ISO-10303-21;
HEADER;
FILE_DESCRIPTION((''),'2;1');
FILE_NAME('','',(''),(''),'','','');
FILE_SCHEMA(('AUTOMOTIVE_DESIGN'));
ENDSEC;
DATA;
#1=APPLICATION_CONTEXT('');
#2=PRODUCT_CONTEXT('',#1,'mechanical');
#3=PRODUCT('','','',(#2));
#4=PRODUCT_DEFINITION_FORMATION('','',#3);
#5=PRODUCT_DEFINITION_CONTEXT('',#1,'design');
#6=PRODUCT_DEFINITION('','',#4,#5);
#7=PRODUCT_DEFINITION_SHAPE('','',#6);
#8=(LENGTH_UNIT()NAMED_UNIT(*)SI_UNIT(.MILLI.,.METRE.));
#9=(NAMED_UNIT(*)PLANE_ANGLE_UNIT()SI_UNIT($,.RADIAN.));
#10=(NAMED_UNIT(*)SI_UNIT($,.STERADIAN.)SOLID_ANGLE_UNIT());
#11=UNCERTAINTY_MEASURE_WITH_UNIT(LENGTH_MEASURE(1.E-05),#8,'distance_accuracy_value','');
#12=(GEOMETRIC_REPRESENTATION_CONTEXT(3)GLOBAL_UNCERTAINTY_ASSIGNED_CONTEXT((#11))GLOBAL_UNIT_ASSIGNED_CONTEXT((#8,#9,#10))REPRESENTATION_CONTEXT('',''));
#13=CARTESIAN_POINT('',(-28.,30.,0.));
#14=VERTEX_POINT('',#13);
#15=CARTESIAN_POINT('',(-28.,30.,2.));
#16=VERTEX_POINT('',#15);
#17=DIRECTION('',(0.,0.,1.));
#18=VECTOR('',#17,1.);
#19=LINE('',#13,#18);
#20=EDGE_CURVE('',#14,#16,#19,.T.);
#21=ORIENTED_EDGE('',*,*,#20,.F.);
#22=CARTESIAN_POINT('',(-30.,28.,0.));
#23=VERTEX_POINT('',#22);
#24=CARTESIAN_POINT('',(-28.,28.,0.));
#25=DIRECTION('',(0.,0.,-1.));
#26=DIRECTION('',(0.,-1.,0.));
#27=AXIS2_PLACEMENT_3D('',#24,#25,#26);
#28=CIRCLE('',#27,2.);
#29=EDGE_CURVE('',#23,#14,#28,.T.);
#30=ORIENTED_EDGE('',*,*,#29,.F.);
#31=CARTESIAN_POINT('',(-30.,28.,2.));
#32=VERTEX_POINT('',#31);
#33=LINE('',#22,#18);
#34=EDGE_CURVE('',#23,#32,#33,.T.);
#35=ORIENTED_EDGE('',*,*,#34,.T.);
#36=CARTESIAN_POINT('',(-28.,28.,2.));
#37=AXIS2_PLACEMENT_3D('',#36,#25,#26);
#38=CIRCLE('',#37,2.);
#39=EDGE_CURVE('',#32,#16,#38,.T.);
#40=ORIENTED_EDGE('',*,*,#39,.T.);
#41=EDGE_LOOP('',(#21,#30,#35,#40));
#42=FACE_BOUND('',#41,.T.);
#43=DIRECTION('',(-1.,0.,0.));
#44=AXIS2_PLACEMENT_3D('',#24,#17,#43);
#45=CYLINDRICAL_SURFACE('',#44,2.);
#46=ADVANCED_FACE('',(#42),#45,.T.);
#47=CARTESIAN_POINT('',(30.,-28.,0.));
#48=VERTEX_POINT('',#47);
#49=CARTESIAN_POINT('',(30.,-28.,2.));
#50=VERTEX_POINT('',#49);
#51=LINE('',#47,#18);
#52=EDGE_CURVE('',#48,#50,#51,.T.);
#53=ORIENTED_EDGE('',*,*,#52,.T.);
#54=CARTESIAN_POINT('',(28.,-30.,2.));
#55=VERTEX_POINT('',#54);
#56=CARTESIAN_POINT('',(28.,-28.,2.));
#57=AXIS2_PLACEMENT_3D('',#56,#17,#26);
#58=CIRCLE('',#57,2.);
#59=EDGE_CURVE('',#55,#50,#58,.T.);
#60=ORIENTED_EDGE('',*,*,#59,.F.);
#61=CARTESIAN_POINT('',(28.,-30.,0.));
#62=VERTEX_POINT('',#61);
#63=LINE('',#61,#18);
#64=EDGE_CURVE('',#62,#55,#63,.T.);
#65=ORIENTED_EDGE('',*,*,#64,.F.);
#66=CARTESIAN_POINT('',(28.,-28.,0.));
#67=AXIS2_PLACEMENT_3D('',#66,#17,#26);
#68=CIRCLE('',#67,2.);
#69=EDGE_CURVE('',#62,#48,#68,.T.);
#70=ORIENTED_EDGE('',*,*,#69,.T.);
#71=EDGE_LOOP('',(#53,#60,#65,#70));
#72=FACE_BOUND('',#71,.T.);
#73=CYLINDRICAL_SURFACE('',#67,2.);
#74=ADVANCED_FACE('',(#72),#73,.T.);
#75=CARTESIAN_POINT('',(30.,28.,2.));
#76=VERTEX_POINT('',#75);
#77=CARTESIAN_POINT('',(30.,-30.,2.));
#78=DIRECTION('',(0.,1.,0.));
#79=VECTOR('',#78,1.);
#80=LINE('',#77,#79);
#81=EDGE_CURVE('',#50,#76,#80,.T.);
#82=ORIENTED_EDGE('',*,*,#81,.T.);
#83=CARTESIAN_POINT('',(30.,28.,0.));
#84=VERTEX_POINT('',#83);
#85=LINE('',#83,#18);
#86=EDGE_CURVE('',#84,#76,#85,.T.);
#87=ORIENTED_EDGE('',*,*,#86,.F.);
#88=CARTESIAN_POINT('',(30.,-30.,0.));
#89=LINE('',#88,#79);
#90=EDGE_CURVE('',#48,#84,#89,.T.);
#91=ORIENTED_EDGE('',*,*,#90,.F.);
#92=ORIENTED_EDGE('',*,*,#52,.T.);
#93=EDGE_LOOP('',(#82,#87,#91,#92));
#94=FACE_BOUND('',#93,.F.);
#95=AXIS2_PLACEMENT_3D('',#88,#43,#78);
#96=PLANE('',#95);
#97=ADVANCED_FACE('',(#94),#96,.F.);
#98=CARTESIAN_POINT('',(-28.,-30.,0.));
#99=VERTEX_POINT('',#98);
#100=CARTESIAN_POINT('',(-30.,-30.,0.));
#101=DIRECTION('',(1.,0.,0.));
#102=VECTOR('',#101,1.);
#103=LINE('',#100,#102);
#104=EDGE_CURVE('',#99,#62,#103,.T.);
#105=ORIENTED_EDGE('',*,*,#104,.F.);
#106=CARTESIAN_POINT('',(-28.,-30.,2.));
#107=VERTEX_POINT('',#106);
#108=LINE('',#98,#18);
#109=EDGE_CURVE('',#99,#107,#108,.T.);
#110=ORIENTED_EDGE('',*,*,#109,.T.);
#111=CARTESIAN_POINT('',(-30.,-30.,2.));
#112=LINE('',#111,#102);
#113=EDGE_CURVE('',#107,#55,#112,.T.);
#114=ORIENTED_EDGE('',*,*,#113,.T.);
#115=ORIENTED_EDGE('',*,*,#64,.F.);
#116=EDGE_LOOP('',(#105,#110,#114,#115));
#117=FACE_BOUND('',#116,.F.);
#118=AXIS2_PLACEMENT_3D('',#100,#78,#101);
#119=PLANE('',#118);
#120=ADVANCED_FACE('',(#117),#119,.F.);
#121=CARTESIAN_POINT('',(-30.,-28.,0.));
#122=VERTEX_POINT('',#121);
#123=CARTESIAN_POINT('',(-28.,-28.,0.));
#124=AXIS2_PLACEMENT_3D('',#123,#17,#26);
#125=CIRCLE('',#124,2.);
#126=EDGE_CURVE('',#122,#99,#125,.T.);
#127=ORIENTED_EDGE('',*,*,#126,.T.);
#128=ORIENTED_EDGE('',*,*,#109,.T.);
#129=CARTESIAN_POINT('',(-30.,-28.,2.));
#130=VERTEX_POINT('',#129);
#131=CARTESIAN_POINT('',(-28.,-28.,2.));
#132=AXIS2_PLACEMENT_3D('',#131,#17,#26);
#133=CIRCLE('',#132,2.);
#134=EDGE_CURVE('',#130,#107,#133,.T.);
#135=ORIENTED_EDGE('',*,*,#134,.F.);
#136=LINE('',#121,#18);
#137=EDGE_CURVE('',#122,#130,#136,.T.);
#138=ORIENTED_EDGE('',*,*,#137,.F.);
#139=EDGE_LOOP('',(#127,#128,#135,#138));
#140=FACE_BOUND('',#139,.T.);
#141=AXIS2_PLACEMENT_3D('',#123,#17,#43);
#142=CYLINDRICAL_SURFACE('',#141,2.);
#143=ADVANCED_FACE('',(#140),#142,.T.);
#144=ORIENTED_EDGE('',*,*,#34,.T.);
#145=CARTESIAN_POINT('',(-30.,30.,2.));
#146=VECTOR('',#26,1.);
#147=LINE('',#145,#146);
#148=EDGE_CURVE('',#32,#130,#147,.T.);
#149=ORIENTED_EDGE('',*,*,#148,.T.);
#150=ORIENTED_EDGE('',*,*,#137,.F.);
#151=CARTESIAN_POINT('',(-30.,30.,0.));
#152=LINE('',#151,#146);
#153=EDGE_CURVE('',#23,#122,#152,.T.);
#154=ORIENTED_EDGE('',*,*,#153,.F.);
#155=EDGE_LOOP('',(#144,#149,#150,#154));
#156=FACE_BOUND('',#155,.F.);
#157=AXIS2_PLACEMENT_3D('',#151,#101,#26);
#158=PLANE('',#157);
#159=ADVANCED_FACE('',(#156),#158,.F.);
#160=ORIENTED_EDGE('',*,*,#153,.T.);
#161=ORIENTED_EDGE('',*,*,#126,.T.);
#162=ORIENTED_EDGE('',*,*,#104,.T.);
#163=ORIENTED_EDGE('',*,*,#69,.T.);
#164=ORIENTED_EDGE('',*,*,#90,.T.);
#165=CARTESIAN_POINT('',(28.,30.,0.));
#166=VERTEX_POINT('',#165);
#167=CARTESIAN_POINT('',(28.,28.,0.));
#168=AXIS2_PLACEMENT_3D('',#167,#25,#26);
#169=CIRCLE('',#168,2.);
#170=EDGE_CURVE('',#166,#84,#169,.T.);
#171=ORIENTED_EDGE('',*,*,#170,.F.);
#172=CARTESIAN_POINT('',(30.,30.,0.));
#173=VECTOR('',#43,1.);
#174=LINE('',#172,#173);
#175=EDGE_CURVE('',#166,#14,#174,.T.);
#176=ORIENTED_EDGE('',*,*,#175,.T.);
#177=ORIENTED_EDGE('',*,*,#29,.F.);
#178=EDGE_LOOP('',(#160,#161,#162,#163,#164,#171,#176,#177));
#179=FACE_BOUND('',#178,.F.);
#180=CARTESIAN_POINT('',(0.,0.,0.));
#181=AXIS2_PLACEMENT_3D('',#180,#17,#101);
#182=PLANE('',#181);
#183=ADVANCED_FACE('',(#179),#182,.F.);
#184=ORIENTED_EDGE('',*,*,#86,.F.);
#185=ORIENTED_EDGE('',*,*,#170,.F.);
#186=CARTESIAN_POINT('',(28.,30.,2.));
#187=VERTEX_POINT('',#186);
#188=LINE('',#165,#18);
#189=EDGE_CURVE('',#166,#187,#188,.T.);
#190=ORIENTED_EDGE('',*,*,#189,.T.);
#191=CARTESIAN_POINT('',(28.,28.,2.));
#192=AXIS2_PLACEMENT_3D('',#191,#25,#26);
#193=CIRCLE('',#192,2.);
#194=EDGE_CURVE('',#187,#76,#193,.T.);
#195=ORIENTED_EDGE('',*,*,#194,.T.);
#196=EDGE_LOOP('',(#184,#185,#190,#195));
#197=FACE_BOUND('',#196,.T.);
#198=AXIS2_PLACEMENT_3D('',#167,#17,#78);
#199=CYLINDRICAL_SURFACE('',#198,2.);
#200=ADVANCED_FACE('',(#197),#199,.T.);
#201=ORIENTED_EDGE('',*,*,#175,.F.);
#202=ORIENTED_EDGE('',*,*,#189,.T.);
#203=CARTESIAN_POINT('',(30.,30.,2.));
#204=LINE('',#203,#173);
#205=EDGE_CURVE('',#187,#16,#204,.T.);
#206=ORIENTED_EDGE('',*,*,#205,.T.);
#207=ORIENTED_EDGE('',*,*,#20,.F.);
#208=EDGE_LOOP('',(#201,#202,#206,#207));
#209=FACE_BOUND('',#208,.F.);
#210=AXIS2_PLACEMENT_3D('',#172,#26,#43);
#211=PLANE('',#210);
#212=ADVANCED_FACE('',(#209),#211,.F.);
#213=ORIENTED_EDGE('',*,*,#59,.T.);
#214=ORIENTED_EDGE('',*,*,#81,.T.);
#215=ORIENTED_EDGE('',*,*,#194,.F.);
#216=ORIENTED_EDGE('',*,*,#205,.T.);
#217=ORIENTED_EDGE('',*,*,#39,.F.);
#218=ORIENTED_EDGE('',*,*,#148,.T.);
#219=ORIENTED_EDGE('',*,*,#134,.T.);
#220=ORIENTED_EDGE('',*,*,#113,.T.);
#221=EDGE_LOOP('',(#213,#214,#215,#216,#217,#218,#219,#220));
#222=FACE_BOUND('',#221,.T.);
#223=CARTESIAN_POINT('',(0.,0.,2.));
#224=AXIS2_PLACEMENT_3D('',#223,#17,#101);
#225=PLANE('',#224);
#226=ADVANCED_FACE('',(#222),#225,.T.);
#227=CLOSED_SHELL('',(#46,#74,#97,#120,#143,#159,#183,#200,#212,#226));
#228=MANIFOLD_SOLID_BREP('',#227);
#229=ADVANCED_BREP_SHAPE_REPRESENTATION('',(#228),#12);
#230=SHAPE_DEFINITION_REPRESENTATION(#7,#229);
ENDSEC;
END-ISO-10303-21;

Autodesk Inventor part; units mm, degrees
ref_plane "YZ Plane" through (0, 0, 0) normal (1, 0, 0) x (0, 1, 0)
ref_plane "XZ Plane" through (0, 0, 0) normal (0, 1, 0) x (-1, 0, 0)
ref_plane "XY Plane" through (0, 0, 0) normal (0, 0, 1) x (1, 0, 0)
sketch "Sketch1" plane through (0, 0, 0) normal (0, 0, 1) x (1, 0, 0)
  line L0 (-30, -30) -> (30, -30)
  line L1 (30, -30) -> (30, 30)
  line L2 (30, 30) -> (-30, 30)
  line L3 (-30, 30) -> (-30, -30)
  line L4 (-30, -30) -> (30, 30) construction
  line L5 (30, -30) -> (-30, 30) construction
  line L6 (15.25, -15.25) -> (-15.25, -15.25)
  line L7 (-15.25, -15.25) -> (-15.25, 15.25)
  line L8 (-15.25, 15.25) -> (15.25, 15.25)
  line L9 (15.25, 15.25) -> (15.25, -15.25)
  line L10 (15.25, -15.25) -> (-15.25, 15.25) construction
  line L11 (-15.25, -15.25) -> (15.25, 15.25) construction
  point P0 (0, 0)
  dimension "d154" = 60
  dimension "d155" = 60
  dimension "d172" = 30.5
extrude "Plate5" add sketch "Sketch1" along normal blind 2 contours L3 L2 L1 L0 | L6 L7 L8 L9
fillet "Corner Round1" radius 2 4 edges at (30, 30, 1) (-30, 30, 1) (-30, -30, 1) (30, -30, 1)
properties part number "PNS 767 FDS 1200 CUP 2_1600" material "Stainless Steel"
